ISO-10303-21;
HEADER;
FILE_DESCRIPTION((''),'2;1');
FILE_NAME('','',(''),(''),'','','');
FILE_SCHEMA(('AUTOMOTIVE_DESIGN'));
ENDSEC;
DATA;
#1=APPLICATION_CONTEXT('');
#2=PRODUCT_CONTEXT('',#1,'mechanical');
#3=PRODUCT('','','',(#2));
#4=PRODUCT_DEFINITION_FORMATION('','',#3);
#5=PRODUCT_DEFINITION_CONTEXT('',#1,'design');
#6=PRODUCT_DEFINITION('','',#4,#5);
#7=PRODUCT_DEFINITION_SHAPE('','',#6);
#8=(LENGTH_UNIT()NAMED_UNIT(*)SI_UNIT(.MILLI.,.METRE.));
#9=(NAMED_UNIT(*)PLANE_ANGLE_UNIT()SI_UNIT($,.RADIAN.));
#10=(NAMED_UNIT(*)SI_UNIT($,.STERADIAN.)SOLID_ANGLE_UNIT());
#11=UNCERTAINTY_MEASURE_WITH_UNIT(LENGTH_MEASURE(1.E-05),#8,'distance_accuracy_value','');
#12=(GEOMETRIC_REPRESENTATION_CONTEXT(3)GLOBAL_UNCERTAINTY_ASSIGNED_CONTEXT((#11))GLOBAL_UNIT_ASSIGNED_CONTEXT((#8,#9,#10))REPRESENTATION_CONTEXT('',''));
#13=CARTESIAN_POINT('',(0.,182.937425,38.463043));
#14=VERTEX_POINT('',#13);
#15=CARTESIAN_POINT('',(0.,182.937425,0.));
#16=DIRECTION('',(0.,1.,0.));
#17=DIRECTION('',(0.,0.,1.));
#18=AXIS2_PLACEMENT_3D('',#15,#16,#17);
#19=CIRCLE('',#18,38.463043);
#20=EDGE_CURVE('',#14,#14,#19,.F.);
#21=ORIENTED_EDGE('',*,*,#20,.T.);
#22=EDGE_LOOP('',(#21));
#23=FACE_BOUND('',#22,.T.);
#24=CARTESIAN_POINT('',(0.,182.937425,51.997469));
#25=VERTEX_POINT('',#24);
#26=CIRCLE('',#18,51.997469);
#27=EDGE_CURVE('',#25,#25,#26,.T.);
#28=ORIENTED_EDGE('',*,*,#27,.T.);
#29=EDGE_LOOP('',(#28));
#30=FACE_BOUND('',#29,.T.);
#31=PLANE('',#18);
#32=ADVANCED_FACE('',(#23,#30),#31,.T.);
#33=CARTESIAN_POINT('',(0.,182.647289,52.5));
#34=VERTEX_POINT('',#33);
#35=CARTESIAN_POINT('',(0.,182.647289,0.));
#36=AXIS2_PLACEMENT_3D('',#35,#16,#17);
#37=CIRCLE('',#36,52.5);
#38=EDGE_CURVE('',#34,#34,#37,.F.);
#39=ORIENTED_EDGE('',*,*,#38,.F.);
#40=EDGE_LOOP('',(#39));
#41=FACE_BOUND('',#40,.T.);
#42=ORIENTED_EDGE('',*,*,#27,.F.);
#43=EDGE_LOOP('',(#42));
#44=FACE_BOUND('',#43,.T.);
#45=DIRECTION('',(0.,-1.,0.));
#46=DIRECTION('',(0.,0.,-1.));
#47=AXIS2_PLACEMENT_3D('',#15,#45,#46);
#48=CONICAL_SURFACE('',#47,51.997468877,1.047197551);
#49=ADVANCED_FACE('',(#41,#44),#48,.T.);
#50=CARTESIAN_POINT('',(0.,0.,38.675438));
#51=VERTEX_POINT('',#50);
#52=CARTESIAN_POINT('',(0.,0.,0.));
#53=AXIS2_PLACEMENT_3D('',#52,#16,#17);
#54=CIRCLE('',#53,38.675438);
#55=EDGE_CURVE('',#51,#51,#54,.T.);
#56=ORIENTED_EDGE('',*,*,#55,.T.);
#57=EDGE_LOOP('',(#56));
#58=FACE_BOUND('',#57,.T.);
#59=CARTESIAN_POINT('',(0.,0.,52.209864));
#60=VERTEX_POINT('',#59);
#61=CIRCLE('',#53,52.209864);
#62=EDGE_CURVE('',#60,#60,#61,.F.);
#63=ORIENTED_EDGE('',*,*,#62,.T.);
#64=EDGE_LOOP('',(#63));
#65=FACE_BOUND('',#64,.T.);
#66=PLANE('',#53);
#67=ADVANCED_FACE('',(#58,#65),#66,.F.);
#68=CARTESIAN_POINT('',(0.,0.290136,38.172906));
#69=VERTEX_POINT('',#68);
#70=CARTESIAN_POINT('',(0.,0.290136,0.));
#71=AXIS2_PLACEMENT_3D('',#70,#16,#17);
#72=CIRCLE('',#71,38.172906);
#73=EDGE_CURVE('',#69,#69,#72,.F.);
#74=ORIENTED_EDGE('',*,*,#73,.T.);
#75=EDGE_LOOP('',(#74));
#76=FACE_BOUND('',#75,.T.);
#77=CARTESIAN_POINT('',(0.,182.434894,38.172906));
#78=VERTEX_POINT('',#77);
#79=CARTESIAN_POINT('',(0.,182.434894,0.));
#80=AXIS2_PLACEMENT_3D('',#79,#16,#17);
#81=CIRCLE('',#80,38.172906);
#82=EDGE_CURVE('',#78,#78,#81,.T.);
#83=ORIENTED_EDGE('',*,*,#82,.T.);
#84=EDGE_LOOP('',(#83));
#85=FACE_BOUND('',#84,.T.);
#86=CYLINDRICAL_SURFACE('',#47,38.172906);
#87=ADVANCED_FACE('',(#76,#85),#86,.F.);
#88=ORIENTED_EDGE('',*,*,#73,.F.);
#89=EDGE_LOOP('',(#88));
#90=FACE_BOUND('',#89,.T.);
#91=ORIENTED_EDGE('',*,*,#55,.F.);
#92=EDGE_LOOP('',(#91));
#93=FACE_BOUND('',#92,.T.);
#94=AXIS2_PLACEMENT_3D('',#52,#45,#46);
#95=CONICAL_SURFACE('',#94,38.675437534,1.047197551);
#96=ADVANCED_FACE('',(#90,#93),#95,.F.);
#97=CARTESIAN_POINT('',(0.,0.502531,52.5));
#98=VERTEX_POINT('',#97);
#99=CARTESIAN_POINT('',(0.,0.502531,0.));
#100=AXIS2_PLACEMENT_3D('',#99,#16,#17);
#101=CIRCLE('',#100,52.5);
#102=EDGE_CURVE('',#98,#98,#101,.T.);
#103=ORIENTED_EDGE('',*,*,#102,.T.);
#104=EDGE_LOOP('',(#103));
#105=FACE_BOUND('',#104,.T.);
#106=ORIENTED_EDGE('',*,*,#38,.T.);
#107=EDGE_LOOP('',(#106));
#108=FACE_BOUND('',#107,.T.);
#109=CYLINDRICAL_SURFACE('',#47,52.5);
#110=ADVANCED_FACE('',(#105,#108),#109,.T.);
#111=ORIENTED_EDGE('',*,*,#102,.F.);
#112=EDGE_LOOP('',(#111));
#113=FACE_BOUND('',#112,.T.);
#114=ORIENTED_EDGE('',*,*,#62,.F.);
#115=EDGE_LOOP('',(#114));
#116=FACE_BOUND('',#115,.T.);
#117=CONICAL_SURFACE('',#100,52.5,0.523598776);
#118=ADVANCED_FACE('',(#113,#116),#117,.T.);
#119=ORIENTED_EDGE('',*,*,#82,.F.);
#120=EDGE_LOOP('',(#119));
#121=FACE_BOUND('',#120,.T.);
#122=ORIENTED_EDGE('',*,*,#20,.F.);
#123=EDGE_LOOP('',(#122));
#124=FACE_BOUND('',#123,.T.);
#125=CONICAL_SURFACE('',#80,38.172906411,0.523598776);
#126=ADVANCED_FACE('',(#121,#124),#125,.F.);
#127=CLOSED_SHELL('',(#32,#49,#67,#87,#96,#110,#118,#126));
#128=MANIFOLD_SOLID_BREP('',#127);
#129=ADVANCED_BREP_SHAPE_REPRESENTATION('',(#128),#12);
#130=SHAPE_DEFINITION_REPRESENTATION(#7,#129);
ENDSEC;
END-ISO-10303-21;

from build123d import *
from OCP.BRepFilletAPI import BRepFilletAPI_MakeChamfer

# Parameters (mm, degrees)
SKETCH1_R           = 52.5
BOSS_EXTRUDE1_DEPTH = 182.937425126
SKETCH2_R           = 38.172906411
CUT_EXTRUDE1_DEPTH  = 198.429991419
CHAMFER1_SIZE       = 0.290136479
CHAMFER1_SIZE2      = 0.502531123


with BuildPart() as part:
    # Sketch1 → Boss-Extrude1 (new body)
    with BuildSketch(Plane(origin=(0, 0, 0), x_dir=(1, 0, 0), z_dir=(0, 1, 0))):
        Circle(SKETCH1_R)
    extrude(amount=BOSS_EXTRUDE1_DEPTH)

    # Sketch2 → Cut-Extrude1 (cut, through all)
    with BuildSketch(Plane(origin=(0, 0, 0), x_dir=(1, 0, 0), z_dir=(0, 1, 0))):
        Circle(SKETCH2_R)
    extrude(amount=CUT_EXTRUDE1_DEPTH, mode=Mode.SUBTRACT)

    # Chamfer1: one chamfer whose edges measure the first distance from different faces: ONE call of the kernel's chamfer builder (chamfer() names one face for all edges)
    chamfer1_edges_1 = [part.edges().sort_by_distance(p)[0] for p in [
        (-38.172906411, 182.937425126, 0),
    ]]
    chamfer1_side_1 = [part.faces().sort_by_distance(p)[0] for p in [
        (-51.01507576, 182.937425126, 0),
    ]]
    chamfer1_edges_2 = [part.edges().sort_by_distance(p)[0] for p in [
        (-38.172906411, 0, 0),
    ]]
    chamfer1_side_2 = [part.faces().sort_by_distance(p)[0] for p in [
        (-38.172906411, 91.468712563, 0),
    ]]
    chamfer1_edges_3 = [part.edges().sort_by_distance(p)[0] for p in [
        (-52.5, 0, 0),
    ]]
    chamfer1_side_3 = [part.faces().sort_by_distance(p)[0] for p in [
        (-51.01507576, 0, 0),
    ]]
    chamfer1_edges_4 = [part.edges().sort_by_distance(p)[0] for p in [
        (-52.5, 182.937425126, 0),
    ]]
    chamfer1_side_4 = [part.faces().sort_by_distance(p)[0] for p in [
        (-52.5, 91.468712563, 0),
    ]]
    chamfer1 = BRepFilletAPI_MakeChamfer(part.part.solid().wrapped)
    for e in chamfer1_edges_1:
        chamfer1.Add(CHAMFER1_SIZE, CHAMFER1_SIZE2, e.wrapped, chamfer1_side_1[0].wrapped)  # the first distance lies on this face
    for e in chamfer1_edges_2:
        chamfer1.Add(CHAMFER1_SIZE, CHAMFER1_SIZE2, e.wrapped, chamfer1_side_2[0].wrapped)  # the first distance lies on this face
    for e in chamfer1_edges_3:
        chamfer1.Add(CHAMFER1_SIZE, CHAMFER1_SIZE2, e.wrapped, chamfer1_side_3[0].wrapped)  # the first distance lies on this face
    for e in chamfer1_edges_4:
        chamfer1.Add(CHAMFER1_SIZE, CHAMFER1_SIZE2, e.wrapped, chamfer1_side_4[0].wrapped)  # the first distance lies on this face
    add(Compound.cast(chamfer1.Shape()), mode=Mode.REPLACE)


solid = part.part
